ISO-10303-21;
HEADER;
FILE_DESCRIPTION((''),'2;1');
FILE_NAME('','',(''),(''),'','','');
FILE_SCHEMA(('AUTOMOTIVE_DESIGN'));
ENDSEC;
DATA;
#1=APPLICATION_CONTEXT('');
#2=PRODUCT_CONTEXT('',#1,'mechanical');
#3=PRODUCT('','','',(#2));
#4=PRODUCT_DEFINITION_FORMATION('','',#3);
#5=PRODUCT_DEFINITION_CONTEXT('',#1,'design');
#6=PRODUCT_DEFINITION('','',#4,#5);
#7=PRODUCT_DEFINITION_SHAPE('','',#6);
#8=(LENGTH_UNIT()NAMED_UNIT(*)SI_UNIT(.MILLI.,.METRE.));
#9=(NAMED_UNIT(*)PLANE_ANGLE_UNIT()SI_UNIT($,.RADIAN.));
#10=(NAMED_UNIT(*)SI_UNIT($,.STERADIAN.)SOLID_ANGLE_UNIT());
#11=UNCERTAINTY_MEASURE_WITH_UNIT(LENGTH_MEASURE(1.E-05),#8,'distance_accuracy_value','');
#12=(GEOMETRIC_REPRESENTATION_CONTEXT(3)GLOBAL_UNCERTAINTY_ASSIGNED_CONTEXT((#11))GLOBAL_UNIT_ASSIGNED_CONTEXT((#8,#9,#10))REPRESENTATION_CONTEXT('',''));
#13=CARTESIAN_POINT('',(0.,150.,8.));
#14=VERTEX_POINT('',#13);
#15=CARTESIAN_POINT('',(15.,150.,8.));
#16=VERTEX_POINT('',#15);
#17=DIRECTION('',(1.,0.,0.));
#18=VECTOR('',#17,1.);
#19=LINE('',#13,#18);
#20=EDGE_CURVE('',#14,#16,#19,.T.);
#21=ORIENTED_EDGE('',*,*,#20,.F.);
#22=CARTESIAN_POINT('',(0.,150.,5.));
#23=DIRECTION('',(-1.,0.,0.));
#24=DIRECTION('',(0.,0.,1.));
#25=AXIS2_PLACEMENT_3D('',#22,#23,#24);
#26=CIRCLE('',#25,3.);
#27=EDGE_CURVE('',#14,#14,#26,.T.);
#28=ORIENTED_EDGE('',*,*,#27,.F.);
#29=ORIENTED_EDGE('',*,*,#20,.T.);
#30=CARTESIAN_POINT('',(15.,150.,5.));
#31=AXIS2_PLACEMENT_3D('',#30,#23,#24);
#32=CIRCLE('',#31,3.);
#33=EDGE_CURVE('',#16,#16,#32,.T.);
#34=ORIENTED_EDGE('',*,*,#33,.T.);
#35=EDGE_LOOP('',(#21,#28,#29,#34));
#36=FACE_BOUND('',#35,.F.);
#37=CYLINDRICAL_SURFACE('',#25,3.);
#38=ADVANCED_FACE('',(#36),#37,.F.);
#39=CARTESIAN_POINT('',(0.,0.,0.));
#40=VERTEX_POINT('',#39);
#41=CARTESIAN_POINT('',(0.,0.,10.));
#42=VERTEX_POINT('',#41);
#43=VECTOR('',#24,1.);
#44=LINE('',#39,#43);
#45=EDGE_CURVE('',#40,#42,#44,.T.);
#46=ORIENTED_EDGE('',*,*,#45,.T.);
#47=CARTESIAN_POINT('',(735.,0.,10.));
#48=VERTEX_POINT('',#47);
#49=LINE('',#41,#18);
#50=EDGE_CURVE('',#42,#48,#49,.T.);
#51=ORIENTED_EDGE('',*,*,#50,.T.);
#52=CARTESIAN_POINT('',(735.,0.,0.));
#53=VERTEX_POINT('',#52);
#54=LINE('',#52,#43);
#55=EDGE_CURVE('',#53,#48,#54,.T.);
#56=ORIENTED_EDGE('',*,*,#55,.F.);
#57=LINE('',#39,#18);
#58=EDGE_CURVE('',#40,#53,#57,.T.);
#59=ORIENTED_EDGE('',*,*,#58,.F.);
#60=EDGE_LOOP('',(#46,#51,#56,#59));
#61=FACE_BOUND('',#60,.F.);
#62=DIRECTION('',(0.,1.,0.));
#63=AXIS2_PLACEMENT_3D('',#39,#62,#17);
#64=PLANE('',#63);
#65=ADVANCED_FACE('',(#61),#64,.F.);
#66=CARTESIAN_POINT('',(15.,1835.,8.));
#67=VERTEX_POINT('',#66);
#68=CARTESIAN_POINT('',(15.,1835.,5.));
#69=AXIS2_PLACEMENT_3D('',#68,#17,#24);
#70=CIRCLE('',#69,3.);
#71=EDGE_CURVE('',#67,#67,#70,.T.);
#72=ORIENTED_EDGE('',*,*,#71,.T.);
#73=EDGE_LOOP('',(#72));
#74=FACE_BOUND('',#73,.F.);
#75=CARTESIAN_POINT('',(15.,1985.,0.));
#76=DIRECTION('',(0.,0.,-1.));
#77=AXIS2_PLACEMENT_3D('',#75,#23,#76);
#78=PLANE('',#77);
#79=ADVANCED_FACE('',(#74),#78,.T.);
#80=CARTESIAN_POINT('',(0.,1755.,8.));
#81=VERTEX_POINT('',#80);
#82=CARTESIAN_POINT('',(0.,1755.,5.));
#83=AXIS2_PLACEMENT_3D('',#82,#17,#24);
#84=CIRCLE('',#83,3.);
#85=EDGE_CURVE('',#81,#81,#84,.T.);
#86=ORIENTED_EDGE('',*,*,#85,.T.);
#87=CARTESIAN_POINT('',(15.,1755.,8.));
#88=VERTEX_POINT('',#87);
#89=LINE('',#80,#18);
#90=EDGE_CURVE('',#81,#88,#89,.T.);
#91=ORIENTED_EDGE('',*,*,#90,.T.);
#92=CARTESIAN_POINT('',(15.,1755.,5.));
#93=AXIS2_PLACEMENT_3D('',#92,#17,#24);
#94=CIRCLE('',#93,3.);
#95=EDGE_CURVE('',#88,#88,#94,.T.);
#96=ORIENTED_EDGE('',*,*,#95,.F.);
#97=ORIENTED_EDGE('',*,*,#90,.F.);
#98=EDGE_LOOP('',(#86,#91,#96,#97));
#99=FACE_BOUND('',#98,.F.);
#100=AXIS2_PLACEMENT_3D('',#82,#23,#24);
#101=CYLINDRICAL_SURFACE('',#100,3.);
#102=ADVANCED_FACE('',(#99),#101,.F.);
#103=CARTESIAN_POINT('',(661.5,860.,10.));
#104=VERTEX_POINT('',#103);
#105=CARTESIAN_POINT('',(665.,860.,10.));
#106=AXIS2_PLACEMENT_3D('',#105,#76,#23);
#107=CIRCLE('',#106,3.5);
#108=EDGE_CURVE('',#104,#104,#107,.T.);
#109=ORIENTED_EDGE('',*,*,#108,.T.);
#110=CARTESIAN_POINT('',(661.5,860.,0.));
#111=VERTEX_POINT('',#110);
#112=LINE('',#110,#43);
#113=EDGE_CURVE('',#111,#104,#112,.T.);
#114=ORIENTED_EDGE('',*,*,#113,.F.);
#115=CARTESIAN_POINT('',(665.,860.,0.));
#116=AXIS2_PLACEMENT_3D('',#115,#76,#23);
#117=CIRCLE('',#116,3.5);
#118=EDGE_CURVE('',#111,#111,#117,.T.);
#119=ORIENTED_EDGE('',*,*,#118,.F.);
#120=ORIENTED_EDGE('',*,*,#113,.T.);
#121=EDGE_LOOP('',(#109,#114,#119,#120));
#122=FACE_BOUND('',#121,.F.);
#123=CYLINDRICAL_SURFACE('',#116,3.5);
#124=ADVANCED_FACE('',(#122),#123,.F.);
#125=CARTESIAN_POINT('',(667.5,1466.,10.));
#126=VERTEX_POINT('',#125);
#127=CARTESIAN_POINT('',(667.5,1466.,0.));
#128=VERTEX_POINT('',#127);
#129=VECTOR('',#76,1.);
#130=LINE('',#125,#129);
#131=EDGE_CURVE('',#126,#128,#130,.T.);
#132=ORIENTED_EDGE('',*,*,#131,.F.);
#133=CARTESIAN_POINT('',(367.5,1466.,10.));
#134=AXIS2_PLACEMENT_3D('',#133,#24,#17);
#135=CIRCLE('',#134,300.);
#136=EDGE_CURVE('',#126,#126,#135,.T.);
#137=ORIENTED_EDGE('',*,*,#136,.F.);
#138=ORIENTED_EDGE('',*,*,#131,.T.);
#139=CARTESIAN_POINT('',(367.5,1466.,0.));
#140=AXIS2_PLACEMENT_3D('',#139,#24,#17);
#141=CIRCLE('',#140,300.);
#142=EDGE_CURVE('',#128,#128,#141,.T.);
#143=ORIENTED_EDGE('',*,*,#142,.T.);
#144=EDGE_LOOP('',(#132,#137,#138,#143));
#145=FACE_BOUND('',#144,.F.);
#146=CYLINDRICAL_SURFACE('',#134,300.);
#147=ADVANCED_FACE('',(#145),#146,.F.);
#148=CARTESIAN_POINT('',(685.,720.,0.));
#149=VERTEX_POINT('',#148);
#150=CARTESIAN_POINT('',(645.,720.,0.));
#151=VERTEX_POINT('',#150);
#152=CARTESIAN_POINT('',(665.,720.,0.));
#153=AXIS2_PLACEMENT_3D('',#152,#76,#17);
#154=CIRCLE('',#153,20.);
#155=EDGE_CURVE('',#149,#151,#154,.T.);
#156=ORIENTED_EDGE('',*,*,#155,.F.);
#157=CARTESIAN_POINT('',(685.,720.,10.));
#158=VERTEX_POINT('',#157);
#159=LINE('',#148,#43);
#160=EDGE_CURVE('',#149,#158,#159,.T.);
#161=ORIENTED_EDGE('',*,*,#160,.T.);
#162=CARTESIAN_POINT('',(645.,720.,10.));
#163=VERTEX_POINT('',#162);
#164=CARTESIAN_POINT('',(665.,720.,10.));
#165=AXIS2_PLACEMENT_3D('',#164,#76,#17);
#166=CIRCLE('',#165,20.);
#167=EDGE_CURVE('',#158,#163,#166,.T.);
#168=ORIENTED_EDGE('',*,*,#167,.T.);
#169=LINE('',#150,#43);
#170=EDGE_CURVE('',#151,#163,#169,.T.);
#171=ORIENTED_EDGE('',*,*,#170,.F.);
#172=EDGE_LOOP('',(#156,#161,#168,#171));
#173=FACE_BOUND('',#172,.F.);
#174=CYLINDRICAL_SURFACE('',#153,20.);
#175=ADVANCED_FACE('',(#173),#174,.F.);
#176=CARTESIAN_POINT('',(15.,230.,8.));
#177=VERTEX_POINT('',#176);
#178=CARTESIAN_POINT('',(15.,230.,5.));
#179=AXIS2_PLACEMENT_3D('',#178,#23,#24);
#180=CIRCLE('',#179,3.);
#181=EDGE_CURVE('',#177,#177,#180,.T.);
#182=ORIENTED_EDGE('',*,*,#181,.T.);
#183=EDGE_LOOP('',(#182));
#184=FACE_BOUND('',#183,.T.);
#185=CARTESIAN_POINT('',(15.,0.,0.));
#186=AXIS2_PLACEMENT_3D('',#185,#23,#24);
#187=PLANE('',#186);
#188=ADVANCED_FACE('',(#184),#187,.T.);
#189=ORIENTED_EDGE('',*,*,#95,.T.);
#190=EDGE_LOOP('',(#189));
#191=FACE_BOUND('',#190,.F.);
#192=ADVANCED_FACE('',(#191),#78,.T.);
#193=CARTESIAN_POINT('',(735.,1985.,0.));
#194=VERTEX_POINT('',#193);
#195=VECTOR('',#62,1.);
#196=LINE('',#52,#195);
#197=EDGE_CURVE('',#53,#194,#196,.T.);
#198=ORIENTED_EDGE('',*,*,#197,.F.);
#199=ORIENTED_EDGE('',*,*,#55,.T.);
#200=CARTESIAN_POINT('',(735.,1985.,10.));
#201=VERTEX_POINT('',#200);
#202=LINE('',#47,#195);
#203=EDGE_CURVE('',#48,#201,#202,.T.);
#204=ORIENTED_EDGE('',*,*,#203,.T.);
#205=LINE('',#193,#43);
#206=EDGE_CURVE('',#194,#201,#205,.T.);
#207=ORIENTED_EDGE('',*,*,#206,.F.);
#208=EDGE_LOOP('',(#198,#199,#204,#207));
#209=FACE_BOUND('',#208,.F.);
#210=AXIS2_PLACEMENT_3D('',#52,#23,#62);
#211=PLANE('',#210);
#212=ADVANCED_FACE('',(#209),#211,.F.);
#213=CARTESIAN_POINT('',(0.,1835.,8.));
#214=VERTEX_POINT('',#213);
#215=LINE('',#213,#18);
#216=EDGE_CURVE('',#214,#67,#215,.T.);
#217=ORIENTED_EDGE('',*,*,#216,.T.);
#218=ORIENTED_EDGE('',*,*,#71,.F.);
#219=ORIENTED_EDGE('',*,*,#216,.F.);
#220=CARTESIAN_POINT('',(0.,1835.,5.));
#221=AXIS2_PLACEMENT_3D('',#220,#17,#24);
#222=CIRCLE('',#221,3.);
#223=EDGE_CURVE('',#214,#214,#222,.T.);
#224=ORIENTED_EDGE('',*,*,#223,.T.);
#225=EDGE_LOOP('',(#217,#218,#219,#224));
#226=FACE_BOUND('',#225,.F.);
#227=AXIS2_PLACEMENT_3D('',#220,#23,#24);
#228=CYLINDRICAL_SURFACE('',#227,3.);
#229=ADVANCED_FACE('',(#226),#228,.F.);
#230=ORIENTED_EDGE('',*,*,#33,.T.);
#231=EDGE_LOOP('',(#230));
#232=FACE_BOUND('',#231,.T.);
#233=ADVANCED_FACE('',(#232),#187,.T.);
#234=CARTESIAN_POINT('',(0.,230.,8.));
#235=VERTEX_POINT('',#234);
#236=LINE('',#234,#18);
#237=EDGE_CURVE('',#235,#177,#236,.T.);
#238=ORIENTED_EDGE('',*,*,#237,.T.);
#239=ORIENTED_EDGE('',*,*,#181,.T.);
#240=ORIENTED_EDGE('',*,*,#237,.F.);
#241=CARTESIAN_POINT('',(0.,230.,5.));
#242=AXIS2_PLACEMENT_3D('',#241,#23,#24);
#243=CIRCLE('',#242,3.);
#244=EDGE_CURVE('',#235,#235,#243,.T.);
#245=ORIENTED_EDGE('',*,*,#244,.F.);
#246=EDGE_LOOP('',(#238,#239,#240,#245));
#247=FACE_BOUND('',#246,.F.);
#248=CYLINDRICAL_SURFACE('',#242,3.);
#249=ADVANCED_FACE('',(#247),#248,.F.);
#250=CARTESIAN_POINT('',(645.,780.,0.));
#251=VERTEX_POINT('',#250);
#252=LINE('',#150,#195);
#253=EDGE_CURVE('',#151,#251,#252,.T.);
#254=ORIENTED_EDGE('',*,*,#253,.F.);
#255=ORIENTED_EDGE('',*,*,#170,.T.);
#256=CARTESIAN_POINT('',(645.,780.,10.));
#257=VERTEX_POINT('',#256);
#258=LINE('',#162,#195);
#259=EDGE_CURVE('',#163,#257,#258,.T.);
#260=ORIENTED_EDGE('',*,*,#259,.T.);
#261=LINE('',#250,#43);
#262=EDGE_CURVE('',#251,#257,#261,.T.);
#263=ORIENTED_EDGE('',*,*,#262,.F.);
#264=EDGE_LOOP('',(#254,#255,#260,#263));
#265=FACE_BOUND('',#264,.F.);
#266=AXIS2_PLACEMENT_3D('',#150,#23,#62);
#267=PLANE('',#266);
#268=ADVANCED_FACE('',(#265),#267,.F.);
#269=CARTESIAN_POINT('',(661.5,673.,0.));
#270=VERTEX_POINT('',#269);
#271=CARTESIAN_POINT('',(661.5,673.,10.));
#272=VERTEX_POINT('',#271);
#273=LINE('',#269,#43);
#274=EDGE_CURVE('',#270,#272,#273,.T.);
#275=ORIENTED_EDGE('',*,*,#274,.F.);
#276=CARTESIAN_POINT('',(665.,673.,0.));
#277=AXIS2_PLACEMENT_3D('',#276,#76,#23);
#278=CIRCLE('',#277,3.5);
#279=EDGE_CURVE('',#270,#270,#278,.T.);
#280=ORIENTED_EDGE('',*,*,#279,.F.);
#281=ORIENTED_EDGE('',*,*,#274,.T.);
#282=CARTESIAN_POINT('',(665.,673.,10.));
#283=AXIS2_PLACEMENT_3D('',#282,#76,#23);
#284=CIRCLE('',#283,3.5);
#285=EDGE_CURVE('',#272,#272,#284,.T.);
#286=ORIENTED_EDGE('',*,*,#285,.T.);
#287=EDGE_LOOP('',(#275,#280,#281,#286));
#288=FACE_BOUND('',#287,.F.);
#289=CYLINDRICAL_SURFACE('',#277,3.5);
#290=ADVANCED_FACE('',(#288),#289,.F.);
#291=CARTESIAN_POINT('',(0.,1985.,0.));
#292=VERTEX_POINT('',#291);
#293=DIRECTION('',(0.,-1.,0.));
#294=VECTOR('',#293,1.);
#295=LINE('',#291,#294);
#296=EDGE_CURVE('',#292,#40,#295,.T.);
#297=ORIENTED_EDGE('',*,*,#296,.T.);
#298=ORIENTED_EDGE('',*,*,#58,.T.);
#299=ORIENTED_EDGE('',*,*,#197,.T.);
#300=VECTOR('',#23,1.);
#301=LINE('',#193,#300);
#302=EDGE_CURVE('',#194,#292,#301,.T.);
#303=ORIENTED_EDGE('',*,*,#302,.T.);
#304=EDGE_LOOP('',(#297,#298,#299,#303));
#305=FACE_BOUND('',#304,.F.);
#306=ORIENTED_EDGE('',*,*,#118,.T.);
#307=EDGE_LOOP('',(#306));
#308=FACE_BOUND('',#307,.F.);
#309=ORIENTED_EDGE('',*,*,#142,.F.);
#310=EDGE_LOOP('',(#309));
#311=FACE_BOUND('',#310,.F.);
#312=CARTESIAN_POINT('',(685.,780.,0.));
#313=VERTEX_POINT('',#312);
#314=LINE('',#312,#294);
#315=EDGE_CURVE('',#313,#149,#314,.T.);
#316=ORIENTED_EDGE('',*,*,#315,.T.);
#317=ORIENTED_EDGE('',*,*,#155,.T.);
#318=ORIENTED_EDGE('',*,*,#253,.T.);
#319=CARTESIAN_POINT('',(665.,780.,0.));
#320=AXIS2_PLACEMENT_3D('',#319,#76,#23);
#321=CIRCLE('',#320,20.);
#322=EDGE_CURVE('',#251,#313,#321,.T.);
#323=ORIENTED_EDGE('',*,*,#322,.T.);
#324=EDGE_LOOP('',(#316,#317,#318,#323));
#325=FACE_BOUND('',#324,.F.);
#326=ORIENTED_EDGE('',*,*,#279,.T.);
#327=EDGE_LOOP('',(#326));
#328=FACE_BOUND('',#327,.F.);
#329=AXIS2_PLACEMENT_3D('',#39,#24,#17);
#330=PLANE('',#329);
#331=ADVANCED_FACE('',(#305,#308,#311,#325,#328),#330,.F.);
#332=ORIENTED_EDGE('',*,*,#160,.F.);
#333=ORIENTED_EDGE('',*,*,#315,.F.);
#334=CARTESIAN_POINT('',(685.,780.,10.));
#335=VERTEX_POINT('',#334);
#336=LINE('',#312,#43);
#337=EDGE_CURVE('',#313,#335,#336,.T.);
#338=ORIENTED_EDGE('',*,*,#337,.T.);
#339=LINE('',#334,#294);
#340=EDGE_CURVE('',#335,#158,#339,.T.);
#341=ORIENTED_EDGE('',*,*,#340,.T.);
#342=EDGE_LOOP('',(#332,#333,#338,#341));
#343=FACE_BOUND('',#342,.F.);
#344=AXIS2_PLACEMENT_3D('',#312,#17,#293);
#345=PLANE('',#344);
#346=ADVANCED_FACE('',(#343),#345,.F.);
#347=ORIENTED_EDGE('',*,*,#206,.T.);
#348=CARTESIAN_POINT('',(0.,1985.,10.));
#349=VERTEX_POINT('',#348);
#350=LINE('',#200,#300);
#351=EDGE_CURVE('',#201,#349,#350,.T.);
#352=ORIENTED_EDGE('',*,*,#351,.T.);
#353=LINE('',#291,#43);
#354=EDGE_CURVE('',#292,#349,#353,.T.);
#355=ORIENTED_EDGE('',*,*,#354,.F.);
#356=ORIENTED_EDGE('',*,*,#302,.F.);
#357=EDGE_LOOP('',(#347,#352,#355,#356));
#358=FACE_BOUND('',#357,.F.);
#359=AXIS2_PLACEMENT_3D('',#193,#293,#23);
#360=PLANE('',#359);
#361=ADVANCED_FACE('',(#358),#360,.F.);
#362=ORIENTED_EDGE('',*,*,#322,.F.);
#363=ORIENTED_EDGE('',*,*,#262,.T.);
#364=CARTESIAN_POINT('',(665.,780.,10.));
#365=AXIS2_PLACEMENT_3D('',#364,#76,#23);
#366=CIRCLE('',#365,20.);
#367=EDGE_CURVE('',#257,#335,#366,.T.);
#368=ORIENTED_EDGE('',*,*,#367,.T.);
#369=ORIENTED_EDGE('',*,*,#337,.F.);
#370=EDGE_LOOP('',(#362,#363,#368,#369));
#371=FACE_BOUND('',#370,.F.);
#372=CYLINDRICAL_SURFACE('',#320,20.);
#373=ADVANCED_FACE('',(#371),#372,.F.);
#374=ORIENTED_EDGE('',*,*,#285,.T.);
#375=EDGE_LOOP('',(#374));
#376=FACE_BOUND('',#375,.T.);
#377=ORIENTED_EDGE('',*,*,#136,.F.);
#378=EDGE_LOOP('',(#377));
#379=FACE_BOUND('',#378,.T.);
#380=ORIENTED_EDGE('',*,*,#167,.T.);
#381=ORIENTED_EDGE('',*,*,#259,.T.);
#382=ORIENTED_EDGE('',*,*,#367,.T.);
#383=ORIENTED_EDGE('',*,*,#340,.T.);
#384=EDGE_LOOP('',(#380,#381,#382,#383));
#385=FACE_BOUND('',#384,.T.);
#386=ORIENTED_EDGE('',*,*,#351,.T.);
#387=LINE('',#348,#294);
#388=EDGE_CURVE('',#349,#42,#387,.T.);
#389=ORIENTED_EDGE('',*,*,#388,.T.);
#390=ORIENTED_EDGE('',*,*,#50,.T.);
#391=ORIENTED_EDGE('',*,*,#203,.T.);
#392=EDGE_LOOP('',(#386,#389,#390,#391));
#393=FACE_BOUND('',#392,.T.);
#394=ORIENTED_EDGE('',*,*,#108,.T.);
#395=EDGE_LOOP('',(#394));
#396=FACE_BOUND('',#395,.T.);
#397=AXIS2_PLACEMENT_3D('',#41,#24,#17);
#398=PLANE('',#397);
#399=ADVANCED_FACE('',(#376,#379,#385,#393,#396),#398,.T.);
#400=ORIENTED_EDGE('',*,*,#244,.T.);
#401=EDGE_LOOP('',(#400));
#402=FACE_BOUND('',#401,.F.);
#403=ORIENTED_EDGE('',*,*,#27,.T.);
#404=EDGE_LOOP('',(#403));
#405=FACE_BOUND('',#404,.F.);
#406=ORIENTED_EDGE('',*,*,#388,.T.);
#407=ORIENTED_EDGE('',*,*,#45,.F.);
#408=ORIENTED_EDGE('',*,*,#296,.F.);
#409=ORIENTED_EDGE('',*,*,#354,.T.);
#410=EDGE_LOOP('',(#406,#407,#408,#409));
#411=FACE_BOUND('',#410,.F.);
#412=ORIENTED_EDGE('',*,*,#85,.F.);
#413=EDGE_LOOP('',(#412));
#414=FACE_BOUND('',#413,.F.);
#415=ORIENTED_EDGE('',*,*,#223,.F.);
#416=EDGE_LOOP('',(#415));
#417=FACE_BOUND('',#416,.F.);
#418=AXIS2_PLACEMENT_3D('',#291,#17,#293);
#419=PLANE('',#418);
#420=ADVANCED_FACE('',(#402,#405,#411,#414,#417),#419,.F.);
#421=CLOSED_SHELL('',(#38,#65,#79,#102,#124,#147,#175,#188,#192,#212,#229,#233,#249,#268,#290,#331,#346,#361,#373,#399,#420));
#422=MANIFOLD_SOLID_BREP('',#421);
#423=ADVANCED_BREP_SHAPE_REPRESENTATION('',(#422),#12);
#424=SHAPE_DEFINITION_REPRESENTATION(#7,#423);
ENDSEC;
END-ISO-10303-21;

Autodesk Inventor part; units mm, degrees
ref_plane "YZ Plane" through (0, 0, 0) normal (1, 0, 0) x (0, 1, 0)
ref_plane "XY Plane" through (0, 0, 0) normal (0, 0, 1) x (1, 0, 0)
sketch "Sketch4" plane through (0, 0, 0) normal (0, 0, 1) x (1, 0, 0)
  line L0 (0, 0) -> (735, 0)
  line L1 (735, 0) -> (735, 1985)
  line L2 (735, 1985) -> (0, 1985)
  line L3 (0, 1985) -> (0, 0)
  dimension "d0" = 735
  dimension "d1" = 1985
extrude "Extrusion1" add sketch "Sketch4" along normal blind 10
sketch "Sketch5" plane through (0, 0, 10) normal (0, 0, 1) x (1, 0, 0)
  circle A0 centre (367.5, 1466) radius 300
  line L0 (735, 1985) -> (0, 1985) projected
  point P0 (0, 0)
  point P1 (367.5, 1985)
  dimension "d4" = 600
  dimension "d5" = 519
extrude "Extrusion2" cut sketch "Sketch5" against normal up to surface (10 mm away)
sketch "Sketch6" plane through (0, 0, 0) normal (0, 0, -1) x (-1, 0, 0)
  line L0 (-665, 720) -> (-665, 780) construction
  line L1 (-645, 720) -> (-645, 780)
  line L2 (-685, 780) -> (-685, 720)
  arc A0 (-685, 720) -> (-645, 720) centre (-665, 720) ccw
  arc A1 (-645, 780) -> (-685, 780) centre (-665, 780) ccw
  line L3 (0, 0) -> (-735, 0) projected
  line L4 (-735, 0) -> (-735, 1985) projected
  circle A2 centre (-665, 860) radius 3.5
  circle A3 centre (-665, 673) radius 3.5
  point P0 (-665, 750)
  point P1 (-665, 700)
  point P2 (-665, 800)
  dimension "d8" = 700
  dimension "d9" = 50
  dimension "d10" = 40
  dimension "d11" = 100
  dimension "d12" = 7
  dimension "d13" = 60
  dimension "d16" = 187
  dimension "d17" = 7
extrude "Extrusion3" cut sketch "Sketch6" against normal blind 10 contours A0 L2 A1 L1 | A2
extrude "Extrusion4" cut sketch "Sketch6" against normal up to surface (10 mm away) contours A3
sketch "Sketch7" plane through (0, 0, 0) normal (-1, 0, 0) x (0, 0, 1)
  circle A0 centre (5, 150) radius 3
  circle A1 centre (5, 230) radius 3
  line L0 (0, 0) -> (10, 0) projected
  point P0 (5, 0)
  dimension "d21" = 150
  dimension "d22" = 80
  dimension "d23" = 6
extrude "Extrusion5" cut sketch "Sketch7" against normal blind 15
thread "Thread1" size "M6x1" class "6H" standard "ISO Metric profile" length 10
thread "Thread2" size "M6x1" class "6H" standard "ISO Metric profile" length 10
ref_plane "Work Plane1" through (0, 992.5, 0) normal (0, 1, 0) x (-1, 0, 0)
mirror "Mirror1" about plane through (0, 992.5, 0) normal (0, 1, 0) of "Extrusion5"
equation "\"d0\" = RahmBrei"
equation "\"d1\" = RahmHoeh"
equation "\"d2\" = RahmDick"
equation "\"RahmBrei\" = 735"
equation "\"RahmHoeh\" = 1985"
equation "\"RahmDick\" = 10"
properties part number "Rahmen"
